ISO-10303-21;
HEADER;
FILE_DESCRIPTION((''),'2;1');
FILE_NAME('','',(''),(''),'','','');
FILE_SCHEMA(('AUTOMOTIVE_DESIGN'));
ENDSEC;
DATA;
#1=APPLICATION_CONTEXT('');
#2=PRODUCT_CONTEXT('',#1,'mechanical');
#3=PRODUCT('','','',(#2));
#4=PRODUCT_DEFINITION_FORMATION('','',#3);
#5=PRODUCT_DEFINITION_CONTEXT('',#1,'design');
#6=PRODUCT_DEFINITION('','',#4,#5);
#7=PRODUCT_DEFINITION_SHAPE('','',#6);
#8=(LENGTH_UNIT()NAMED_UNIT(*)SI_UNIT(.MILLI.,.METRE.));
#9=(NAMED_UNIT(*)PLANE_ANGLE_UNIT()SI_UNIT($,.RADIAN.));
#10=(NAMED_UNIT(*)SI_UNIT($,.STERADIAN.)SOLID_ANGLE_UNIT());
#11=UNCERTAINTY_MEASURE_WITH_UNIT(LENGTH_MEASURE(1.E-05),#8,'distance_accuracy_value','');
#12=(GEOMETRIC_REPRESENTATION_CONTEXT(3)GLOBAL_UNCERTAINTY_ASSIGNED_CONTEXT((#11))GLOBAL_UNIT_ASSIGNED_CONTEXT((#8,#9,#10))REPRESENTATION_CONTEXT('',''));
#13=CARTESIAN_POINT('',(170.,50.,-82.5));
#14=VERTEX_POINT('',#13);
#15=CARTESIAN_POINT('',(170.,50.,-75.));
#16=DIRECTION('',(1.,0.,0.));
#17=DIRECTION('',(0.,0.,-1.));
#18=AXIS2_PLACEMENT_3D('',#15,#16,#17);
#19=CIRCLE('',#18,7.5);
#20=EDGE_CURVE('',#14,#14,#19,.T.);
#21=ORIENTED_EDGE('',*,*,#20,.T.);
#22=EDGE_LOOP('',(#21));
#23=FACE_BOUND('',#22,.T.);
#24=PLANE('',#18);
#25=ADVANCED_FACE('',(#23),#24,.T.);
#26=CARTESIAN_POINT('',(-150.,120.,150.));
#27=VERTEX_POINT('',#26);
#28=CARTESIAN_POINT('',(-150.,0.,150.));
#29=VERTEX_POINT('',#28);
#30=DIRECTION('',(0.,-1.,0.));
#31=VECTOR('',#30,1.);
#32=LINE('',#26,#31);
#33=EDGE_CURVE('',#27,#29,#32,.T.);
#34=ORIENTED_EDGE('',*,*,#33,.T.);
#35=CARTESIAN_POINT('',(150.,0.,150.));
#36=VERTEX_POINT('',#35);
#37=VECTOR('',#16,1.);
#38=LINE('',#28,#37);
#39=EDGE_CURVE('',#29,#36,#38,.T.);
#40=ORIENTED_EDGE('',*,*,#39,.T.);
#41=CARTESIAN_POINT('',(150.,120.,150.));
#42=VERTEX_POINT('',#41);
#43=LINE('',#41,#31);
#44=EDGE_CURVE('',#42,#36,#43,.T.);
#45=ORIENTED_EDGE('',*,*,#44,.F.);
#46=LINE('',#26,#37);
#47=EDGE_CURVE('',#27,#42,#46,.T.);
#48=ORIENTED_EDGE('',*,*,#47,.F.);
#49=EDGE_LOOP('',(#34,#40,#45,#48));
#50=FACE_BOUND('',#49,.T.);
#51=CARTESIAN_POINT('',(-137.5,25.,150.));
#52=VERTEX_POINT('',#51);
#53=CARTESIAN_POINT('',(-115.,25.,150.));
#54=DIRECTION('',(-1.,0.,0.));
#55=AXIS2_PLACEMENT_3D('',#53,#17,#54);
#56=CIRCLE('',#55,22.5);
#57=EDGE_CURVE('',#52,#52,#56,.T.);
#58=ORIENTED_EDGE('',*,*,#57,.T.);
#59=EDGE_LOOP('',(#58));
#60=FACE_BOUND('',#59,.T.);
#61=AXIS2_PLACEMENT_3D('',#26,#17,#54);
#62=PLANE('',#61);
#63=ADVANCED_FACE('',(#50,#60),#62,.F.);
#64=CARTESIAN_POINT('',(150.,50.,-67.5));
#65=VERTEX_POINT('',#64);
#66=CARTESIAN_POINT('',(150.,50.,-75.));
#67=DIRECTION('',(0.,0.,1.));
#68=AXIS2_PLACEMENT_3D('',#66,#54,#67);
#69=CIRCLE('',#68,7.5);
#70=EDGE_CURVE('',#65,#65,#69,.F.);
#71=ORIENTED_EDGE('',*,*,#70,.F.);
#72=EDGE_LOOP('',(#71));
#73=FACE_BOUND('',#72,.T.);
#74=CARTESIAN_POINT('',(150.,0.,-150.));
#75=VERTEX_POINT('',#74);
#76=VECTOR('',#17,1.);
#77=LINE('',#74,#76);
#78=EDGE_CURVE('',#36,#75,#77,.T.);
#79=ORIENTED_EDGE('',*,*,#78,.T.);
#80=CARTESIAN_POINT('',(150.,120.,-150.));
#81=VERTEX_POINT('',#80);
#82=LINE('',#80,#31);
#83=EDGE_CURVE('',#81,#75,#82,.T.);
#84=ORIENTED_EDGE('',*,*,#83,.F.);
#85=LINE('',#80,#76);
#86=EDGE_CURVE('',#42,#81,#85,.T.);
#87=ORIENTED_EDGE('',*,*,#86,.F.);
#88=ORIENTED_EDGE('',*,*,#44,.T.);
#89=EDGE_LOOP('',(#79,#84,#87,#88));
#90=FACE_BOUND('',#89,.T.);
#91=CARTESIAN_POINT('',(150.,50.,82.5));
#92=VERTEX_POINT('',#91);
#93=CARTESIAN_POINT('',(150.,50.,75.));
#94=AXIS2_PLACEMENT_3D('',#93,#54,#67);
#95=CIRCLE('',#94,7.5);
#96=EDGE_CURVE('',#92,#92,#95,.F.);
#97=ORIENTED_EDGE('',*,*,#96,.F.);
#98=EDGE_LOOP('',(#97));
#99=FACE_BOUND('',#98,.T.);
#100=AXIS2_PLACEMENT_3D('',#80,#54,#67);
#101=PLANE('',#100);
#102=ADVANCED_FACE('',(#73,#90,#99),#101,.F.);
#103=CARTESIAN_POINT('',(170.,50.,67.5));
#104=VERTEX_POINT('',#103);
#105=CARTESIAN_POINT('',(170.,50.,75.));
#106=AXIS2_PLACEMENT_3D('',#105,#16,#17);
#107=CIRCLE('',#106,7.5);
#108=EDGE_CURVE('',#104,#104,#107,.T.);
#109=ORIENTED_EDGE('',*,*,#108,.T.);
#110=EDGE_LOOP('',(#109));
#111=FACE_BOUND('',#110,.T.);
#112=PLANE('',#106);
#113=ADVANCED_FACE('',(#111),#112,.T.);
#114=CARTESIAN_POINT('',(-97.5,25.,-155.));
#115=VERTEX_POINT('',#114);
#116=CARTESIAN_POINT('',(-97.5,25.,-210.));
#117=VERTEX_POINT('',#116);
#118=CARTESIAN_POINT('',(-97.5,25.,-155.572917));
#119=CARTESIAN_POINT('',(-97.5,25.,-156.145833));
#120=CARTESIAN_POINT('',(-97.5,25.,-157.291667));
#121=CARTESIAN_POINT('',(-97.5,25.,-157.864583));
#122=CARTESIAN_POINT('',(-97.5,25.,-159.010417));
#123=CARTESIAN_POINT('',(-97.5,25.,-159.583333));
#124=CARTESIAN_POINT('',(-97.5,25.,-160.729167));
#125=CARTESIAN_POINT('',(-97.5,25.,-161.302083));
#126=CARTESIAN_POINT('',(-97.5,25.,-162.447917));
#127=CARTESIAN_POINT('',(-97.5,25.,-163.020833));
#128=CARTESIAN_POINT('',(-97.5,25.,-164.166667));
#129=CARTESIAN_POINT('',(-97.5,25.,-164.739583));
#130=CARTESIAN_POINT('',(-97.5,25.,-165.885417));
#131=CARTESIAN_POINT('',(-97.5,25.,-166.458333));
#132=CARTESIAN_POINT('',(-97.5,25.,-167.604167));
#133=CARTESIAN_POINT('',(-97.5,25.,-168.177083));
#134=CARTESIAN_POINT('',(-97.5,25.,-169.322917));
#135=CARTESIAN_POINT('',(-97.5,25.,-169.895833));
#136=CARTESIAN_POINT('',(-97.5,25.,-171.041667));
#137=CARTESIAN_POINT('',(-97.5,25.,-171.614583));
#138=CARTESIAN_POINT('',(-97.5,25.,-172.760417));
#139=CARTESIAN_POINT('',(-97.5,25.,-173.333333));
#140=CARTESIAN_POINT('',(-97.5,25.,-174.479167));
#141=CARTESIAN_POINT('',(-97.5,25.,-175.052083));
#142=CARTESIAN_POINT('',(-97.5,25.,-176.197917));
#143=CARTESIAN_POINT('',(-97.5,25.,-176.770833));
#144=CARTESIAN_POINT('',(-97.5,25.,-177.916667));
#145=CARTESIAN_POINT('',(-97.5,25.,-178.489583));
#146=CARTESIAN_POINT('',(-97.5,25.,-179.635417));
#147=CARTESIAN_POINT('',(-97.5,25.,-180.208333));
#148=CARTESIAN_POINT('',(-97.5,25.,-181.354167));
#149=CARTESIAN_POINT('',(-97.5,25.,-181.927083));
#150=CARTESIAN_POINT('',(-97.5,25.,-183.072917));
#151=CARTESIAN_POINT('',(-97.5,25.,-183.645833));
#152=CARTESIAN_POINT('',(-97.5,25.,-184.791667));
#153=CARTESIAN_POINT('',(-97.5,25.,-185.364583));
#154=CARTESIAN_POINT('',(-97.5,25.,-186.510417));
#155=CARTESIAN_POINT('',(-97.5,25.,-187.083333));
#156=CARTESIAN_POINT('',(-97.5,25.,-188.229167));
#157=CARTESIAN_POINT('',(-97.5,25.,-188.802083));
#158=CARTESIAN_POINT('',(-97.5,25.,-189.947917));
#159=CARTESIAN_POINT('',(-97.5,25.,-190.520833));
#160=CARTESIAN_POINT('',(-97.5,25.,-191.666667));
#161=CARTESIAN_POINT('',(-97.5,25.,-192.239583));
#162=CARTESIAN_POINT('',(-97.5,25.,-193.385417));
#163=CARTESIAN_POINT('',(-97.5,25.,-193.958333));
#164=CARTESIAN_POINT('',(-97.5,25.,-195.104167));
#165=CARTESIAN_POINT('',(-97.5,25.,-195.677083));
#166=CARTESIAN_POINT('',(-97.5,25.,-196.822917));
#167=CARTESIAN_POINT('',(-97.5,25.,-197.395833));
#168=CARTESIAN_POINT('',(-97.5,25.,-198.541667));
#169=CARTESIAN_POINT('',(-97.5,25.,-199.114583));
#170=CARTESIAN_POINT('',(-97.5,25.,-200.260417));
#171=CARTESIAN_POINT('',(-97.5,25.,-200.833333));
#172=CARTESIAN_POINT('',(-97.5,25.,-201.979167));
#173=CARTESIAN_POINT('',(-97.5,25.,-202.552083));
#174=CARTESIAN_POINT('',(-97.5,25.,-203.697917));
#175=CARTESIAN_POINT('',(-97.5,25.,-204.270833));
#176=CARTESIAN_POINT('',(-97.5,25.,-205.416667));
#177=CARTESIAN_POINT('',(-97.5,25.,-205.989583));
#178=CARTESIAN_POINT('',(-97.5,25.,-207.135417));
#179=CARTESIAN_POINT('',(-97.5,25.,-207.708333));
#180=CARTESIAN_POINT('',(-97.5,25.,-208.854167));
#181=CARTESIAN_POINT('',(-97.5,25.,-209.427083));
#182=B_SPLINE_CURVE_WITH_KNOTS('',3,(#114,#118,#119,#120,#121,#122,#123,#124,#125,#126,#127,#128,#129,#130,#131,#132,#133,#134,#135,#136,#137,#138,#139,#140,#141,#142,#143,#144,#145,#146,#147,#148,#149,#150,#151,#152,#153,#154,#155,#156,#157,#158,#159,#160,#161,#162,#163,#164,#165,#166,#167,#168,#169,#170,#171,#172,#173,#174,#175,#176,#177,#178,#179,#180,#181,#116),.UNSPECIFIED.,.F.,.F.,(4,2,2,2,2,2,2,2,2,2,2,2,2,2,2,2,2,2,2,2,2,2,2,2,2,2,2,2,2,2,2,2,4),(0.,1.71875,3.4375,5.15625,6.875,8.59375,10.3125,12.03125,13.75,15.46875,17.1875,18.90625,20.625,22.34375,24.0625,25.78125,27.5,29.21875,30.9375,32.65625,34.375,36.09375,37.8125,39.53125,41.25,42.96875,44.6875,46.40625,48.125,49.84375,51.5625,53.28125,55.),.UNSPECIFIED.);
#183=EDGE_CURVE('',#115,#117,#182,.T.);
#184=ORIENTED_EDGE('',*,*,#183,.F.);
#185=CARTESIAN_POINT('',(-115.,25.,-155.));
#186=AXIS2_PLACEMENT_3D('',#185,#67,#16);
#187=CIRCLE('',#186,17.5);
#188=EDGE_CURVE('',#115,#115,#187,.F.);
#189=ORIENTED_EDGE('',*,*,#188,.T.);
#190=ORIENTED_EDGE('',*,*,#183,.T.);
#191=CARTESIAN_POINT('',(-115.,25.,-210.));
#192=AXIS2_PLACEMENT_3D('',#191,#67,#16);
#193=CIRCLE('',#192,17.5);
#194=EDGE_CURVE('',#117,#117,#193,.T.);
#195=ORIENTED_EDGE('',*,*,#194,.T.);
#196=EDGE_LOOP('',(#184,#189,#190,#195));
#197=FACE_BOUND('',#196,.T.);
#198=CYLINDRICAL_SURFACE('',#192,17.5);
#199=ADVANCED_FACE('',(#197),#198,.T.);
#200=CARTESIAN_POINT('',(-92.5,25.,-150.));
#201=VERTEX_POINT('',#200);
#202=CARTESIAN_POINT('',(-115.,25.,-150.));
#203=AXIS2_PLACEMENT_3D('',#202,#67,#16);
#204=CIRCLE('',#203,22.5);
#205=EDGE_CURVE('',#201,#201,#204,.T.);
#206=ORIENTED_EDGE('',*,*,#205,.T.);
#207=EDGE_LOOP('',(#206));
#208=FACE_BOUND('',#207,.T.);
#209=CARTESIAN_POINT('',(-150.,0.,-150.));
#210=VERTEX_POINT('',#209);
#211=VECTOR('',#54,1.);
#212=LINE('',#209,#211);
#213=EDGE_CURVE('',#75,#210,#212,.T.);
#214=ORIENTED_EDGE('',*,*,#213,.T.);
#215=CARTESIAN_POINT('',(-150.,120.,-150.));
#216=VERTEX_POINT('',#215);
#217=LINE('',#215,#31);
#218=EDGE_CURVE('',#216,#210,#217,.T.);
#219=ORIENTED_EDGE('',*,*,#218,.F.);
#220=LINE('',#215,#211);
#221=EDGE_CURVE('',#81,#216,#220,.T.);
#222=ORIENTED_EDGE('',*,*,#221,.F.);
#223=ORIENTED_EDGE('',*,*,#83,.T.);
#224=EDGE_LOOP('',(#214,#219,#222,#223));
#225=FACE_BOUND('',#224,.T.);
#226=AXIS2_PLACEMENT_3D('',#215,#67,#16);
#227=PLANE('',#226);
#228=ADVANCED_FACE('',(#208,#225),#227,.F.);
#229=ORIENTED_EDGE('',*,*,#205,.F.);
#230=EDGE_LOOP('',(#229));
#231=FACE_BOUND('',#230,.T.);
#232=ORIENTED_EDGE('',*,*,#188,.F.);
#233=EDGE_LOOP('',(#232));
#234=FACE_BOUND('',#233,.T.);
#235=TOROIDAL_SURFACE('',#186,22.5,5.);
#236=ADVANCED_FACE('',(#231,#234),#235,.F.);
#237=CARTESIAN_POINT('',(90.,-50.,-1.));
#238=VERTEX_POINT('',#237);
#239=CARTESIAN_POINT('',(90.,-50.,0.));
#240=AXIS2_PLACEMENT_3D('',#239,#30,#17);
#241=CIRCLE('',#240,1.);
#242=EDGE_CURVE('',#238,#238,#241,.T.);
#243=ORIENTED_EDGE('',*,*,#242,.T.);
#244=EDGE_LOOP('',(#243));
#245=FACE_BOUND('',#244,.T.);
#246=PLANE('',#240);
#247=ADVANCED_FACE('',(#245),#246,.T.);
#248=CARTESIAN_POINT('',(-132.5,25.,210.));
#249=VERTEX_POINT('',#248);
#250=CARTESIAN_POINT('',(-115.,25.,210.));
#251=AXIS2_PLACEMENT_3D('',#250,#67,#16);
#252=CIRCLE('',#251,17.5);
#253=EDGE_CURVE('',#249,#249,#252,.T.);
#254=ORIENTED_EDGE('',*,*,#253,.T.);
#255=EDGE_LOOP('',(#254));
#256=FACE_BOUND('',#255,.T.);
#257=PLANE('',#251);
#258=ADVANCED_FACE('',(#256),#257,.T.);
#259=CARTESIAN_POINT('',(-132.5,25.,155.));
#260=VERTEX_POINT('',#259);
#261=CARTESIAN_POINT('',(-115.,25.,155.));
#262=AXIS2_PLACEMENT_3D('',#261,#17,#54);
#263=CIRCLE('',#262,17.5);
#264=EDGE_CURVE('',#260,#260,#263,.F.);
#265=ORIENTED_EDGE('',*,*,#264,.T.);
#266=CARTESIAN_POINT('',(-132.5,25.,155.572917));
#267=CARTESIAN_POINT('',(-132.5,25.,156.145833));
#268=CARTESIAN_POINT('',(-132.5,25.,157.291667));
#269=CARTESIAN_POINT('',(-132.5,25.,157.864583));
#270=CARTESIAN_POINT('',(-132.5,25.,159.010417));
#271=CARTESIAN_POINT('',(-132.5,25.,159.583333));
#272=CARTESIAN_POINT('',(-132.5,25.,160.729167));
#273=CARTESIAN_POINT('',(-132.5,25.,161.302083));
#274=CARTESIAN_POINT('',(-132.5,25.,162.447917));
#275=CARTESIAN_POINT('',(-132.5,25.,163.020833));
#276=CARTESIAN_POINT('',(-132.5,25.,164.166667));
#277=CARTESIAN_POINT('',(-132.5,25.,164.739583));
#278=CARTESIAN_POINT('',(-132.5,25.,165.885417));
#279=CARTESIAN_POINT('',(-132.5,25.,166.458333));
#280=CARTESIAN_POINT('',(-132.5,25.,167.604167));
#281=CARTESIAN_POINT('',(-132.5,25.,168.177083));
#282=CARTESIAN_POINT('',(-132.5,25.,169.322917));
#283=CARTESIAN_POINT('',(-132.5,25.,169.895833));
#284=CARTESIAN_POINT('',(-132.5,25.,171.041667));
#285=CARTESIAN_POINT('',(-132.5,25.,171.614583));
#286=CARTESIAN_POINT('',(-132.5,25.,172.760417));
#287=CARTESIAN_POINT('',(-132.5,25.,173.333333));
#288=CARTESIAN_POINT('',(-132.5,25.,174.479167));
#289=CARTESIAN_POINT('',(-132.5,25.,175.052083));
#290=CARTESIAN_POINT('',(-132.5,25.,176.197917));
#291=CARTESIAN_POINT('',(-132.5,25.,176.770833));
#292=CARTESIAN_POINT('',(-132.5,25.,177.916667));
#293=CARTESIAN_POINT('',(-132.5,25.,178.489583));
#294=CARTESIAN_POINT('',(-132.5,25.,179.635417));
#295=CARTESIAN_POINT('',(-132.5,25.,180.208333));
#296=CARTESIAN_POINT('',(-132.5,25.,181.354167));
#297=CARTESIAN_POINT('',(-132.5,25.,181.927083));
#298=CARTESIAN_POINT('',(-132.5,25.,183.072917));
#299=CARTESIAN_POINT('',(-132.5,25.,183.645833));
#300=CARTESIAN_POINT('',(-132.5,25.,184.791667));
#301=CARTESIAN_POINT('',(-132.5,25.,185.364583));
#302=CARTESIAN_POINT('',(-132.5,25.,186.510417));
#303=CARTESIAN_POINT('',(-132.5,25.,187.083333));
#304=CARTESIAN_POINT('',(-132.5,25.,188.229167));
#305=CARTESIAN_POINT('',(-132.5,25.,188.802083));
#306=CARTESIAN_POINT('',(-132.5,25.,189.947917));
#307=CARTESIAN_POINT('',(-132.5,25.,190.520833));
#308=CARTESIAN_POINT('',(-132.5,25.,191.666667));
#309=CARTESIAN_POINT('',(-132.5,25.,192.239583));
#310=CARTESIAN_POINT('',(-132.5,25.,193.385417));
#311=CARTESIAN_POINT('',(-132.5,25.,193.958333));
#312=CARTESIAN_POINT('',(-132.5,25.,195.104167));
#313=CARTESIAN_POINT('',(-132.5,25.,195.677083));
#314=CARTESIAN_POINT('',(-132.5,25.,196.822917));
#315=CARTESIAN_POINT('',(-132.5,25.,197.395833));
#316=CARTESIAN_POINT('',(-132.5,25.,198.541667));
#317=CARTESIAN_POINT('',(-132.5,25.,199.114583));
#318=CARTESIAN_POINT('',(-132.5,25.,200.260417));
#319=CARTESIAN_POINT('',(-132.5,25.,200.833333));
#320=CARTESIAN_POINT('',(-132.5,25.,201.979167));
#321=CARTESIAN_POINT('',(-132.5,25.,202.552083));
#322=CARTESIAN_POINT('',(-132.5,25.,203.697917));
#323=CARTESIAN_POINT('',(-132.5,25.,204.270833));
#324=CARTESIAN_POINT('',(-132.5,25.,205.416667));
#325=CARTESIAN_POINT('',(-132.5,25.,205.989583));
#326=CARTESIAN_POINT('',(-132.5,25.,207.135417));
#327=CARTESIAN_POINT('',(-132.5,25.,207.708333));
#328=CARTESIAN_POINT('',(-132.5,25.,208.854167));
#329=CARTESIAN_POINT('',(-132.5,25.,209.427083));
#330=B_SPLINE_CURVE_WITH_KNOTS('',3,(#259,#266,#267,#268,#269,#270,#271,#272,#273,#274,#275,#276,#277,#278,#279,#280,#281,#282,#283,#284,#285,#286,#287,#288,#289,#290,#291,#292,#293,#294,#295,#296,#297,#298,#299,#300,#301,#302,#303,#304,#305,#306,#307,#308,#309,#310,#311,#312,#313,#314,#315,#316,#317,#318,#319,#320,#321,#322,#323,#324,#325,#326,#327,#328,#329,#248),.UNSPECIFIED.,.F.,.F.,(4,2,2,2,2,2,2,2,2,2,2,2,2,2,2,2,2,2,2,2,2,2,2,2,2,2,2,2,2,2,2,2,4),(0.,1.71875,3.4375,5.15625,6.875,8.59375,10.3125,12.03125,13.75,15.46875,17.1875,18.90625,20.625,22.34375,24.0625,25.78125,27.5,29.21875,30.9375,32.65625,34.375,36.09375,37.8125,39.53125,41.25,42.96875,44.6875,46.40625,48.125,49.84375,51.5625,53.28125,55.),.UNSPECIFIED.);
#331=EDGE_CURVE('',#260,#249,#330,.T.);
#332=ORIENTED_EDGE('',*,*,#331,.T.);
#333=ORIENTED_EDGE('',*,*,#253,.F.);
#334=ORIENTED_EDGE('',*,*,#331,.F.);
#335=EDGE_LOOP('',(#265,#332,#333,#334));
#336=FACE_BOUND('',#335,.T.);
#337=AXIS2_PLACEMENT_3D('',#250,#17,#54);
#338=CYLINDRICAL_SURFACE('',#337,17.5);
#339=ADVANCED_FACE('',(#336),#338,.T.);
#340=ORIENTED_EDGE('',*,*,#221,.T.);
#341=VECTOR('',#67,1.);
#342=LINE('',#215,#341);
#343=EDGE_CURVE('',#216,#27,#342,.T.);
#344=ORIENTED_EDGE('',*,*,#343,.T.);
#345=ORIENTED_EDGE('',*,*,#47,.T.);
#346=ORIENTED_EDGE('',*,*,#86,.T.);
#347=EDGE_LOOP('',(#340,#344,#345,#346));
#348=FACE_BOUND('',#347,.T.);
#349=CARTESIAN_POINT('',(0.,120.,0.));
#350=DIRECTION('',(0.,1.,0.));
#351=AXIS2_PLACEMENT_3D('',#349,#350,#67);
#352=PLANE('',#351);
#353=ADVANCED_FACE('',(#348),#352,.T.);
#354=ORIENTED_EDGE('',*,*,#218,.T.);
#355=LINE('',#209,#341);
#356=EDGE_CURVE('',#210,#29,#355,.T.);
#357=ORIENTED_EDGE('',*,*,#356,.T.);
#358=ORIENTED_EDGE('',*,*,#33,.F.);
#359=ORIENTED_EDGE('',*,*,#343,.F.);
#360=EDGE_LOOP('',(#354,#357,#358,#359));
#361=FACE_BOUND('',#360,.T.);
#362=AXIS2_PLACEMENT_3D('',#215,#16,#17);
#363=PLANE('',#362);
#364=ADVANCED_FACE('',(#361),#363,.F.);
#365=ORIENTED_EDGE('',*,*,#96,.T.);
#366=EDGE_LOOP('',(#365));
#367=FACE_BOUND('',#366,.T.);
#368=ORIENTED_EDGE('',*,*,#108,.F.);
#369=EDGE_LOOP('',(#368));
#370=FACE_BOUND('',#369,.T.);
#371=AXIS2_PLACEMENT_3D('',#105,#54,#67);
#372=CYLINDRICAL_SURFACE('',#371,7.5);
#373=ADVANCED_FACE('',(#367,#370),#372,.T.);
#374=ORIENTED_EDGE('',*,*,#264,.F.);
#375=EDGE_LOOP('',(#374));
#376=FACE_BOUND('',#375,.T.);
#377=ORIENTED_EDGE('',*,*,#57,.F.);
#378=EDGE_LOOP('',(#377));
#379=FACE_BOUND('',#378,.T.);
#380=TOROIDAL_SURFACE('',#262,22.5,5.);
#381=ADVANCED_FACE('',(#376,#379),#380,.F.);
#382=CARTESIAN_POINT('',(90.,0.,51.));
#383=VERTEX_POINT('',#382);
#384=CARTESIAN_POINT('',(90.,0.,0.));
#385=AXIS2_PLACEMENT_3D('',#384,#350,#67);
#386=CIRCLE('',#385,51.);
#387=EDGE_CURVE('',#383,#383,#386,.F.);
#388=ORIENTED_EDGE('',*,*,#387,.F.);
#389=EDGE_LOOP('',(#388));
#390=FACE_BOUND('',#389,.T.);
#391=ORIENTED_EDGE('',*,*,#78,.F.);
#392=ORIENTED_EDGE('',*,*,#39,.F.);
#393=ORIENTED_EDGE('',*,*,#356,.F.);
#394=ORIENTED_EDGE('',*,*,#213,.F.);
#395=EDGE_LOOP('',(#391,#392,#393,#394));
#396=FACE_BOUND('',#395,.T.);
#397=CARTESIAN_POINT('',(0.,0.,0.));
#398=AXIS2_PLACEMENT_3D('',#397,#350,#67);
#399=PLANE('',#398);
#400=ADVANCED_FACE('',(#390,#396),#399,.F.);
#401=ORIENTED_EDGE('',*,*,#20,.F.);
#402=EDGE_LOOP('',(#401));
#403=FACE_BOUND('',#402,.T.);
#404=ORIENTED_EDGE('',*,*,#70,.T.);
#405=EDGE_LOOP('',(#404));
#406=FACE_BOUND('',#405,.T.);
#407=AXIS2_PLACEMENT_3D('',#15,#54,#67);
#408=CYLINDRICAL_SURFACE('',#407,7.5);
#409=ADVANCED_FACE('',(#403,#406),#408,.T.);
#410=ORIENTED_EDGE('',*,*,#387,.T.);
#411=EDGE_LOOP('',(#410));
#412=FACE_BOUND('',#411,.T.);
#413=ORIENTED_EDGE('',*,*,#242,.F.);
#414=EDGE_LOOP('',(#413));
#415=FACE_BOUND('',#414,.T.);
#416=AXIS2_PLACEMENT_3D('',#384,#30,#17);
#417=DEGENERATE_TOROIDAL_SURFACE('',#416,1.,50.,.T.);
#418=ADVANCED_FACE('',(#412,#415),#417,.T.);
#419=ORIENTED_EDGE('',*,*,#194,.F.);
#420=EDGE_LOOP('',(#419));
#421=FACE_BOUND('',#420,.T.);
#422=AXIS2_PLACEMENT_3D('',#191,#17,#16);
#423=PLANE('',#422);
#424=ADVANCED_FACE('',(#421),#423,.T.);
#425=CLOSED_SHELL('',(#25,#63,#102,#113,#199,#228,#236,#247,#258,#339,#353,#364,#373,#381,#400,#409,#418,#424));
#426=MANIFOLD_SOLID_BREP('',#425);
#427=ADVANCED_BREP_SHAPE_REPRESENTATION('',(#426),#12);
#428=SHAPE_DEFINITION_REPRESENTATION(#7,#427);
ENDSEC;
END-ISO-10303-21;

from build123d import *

# Parameters (mm, degrees)
SKETCH1_W           = 300
SKETCH1_H           = 300
BOSS_EXTRUDE1_DEPTH = 120
SKETCH3_R           = 17.5
BOSS_EXTRUDE3_DEPTH = 60
FILLET1_R           = 5
SKETCH4_R           = 51
BOSS_EXTRUDE4_DEPTH = 50
FILLET2_R           = 50
SKETCH6_R           = 7.5
BOSS_EXTRUDE5_DEPTH = 20


with BuildPart() as part:
    # Sketch1 → Boss-Extrude1 (new body)
    with BuildSketch(Plane(origin=(0, 0, 0), x_dir=(1, 0, 0), z_dir=(0, 1, 0))):
        Rectangle(SKETCH1_W, SKETCH1_H)
    extrude(amount=BOSS_EXTRUDE1_DEPTH)

    # Sketch3 → Boss-Extrude3 (add)
    with BuildSketch(Plane.XY.offset(150)):
        with Locations(Location((-115, 25, 0), (0, 0, 180))):
            Circle(SKETCH3_R)
    boss_extrude3 = extrude(amount=BOSS_EXTRUDE3_DEPTH)

    # Mirror1: Boss-Extrude3 across plane
    add(boss_extrude3.mirror(Plane.XY))

    # Fillet1
    fillet1_edges = [part.edges().sort_by_distance(p)[0] for p in [
        (-97.5, 25, 150),
        (-97.5, 25, -150),
    ]]
    fillet(fillet1_edges, radius=FILLET1_R)

    # Sketch4 → Boss-Extrude4 (add)
    with BuildSketch(Plane.XZ):
        with Locations(Location((90, 0, 0), (0, 0, 90))):
            Circle(SKETCH4_R)
    extrude(amount=BOSS_EXTRUDE4_DEPTH)

    # Fillet2
    fillet2_edges = [part.edges().sort_by_distance(p)[0] for p in [
        (90, -50, -51),
    ]]
    fillet(fillet2_edges, radius=FILLET2_R - 0.0001)  # a hair under: the kernel refuses the full size

    # Sketch6 → Boss-Extrude5 (add)
    with BuildSketch(Plane(origin=(150, 0, 0), x_dir=(0, 0, -1), z_dir=(1, 0, 0))):
        with Locations(Location((-75, 50, 0), (0, 0, 180))):
            Circle(SKETCH6_R)
        with Locations(Location((75, 50, 0), (0, 0, 180))):
            Circle(SKETCH6_R)
    extrude(amount=BOSS_EXTRUDE5_DEPTH)


solid = part.part
